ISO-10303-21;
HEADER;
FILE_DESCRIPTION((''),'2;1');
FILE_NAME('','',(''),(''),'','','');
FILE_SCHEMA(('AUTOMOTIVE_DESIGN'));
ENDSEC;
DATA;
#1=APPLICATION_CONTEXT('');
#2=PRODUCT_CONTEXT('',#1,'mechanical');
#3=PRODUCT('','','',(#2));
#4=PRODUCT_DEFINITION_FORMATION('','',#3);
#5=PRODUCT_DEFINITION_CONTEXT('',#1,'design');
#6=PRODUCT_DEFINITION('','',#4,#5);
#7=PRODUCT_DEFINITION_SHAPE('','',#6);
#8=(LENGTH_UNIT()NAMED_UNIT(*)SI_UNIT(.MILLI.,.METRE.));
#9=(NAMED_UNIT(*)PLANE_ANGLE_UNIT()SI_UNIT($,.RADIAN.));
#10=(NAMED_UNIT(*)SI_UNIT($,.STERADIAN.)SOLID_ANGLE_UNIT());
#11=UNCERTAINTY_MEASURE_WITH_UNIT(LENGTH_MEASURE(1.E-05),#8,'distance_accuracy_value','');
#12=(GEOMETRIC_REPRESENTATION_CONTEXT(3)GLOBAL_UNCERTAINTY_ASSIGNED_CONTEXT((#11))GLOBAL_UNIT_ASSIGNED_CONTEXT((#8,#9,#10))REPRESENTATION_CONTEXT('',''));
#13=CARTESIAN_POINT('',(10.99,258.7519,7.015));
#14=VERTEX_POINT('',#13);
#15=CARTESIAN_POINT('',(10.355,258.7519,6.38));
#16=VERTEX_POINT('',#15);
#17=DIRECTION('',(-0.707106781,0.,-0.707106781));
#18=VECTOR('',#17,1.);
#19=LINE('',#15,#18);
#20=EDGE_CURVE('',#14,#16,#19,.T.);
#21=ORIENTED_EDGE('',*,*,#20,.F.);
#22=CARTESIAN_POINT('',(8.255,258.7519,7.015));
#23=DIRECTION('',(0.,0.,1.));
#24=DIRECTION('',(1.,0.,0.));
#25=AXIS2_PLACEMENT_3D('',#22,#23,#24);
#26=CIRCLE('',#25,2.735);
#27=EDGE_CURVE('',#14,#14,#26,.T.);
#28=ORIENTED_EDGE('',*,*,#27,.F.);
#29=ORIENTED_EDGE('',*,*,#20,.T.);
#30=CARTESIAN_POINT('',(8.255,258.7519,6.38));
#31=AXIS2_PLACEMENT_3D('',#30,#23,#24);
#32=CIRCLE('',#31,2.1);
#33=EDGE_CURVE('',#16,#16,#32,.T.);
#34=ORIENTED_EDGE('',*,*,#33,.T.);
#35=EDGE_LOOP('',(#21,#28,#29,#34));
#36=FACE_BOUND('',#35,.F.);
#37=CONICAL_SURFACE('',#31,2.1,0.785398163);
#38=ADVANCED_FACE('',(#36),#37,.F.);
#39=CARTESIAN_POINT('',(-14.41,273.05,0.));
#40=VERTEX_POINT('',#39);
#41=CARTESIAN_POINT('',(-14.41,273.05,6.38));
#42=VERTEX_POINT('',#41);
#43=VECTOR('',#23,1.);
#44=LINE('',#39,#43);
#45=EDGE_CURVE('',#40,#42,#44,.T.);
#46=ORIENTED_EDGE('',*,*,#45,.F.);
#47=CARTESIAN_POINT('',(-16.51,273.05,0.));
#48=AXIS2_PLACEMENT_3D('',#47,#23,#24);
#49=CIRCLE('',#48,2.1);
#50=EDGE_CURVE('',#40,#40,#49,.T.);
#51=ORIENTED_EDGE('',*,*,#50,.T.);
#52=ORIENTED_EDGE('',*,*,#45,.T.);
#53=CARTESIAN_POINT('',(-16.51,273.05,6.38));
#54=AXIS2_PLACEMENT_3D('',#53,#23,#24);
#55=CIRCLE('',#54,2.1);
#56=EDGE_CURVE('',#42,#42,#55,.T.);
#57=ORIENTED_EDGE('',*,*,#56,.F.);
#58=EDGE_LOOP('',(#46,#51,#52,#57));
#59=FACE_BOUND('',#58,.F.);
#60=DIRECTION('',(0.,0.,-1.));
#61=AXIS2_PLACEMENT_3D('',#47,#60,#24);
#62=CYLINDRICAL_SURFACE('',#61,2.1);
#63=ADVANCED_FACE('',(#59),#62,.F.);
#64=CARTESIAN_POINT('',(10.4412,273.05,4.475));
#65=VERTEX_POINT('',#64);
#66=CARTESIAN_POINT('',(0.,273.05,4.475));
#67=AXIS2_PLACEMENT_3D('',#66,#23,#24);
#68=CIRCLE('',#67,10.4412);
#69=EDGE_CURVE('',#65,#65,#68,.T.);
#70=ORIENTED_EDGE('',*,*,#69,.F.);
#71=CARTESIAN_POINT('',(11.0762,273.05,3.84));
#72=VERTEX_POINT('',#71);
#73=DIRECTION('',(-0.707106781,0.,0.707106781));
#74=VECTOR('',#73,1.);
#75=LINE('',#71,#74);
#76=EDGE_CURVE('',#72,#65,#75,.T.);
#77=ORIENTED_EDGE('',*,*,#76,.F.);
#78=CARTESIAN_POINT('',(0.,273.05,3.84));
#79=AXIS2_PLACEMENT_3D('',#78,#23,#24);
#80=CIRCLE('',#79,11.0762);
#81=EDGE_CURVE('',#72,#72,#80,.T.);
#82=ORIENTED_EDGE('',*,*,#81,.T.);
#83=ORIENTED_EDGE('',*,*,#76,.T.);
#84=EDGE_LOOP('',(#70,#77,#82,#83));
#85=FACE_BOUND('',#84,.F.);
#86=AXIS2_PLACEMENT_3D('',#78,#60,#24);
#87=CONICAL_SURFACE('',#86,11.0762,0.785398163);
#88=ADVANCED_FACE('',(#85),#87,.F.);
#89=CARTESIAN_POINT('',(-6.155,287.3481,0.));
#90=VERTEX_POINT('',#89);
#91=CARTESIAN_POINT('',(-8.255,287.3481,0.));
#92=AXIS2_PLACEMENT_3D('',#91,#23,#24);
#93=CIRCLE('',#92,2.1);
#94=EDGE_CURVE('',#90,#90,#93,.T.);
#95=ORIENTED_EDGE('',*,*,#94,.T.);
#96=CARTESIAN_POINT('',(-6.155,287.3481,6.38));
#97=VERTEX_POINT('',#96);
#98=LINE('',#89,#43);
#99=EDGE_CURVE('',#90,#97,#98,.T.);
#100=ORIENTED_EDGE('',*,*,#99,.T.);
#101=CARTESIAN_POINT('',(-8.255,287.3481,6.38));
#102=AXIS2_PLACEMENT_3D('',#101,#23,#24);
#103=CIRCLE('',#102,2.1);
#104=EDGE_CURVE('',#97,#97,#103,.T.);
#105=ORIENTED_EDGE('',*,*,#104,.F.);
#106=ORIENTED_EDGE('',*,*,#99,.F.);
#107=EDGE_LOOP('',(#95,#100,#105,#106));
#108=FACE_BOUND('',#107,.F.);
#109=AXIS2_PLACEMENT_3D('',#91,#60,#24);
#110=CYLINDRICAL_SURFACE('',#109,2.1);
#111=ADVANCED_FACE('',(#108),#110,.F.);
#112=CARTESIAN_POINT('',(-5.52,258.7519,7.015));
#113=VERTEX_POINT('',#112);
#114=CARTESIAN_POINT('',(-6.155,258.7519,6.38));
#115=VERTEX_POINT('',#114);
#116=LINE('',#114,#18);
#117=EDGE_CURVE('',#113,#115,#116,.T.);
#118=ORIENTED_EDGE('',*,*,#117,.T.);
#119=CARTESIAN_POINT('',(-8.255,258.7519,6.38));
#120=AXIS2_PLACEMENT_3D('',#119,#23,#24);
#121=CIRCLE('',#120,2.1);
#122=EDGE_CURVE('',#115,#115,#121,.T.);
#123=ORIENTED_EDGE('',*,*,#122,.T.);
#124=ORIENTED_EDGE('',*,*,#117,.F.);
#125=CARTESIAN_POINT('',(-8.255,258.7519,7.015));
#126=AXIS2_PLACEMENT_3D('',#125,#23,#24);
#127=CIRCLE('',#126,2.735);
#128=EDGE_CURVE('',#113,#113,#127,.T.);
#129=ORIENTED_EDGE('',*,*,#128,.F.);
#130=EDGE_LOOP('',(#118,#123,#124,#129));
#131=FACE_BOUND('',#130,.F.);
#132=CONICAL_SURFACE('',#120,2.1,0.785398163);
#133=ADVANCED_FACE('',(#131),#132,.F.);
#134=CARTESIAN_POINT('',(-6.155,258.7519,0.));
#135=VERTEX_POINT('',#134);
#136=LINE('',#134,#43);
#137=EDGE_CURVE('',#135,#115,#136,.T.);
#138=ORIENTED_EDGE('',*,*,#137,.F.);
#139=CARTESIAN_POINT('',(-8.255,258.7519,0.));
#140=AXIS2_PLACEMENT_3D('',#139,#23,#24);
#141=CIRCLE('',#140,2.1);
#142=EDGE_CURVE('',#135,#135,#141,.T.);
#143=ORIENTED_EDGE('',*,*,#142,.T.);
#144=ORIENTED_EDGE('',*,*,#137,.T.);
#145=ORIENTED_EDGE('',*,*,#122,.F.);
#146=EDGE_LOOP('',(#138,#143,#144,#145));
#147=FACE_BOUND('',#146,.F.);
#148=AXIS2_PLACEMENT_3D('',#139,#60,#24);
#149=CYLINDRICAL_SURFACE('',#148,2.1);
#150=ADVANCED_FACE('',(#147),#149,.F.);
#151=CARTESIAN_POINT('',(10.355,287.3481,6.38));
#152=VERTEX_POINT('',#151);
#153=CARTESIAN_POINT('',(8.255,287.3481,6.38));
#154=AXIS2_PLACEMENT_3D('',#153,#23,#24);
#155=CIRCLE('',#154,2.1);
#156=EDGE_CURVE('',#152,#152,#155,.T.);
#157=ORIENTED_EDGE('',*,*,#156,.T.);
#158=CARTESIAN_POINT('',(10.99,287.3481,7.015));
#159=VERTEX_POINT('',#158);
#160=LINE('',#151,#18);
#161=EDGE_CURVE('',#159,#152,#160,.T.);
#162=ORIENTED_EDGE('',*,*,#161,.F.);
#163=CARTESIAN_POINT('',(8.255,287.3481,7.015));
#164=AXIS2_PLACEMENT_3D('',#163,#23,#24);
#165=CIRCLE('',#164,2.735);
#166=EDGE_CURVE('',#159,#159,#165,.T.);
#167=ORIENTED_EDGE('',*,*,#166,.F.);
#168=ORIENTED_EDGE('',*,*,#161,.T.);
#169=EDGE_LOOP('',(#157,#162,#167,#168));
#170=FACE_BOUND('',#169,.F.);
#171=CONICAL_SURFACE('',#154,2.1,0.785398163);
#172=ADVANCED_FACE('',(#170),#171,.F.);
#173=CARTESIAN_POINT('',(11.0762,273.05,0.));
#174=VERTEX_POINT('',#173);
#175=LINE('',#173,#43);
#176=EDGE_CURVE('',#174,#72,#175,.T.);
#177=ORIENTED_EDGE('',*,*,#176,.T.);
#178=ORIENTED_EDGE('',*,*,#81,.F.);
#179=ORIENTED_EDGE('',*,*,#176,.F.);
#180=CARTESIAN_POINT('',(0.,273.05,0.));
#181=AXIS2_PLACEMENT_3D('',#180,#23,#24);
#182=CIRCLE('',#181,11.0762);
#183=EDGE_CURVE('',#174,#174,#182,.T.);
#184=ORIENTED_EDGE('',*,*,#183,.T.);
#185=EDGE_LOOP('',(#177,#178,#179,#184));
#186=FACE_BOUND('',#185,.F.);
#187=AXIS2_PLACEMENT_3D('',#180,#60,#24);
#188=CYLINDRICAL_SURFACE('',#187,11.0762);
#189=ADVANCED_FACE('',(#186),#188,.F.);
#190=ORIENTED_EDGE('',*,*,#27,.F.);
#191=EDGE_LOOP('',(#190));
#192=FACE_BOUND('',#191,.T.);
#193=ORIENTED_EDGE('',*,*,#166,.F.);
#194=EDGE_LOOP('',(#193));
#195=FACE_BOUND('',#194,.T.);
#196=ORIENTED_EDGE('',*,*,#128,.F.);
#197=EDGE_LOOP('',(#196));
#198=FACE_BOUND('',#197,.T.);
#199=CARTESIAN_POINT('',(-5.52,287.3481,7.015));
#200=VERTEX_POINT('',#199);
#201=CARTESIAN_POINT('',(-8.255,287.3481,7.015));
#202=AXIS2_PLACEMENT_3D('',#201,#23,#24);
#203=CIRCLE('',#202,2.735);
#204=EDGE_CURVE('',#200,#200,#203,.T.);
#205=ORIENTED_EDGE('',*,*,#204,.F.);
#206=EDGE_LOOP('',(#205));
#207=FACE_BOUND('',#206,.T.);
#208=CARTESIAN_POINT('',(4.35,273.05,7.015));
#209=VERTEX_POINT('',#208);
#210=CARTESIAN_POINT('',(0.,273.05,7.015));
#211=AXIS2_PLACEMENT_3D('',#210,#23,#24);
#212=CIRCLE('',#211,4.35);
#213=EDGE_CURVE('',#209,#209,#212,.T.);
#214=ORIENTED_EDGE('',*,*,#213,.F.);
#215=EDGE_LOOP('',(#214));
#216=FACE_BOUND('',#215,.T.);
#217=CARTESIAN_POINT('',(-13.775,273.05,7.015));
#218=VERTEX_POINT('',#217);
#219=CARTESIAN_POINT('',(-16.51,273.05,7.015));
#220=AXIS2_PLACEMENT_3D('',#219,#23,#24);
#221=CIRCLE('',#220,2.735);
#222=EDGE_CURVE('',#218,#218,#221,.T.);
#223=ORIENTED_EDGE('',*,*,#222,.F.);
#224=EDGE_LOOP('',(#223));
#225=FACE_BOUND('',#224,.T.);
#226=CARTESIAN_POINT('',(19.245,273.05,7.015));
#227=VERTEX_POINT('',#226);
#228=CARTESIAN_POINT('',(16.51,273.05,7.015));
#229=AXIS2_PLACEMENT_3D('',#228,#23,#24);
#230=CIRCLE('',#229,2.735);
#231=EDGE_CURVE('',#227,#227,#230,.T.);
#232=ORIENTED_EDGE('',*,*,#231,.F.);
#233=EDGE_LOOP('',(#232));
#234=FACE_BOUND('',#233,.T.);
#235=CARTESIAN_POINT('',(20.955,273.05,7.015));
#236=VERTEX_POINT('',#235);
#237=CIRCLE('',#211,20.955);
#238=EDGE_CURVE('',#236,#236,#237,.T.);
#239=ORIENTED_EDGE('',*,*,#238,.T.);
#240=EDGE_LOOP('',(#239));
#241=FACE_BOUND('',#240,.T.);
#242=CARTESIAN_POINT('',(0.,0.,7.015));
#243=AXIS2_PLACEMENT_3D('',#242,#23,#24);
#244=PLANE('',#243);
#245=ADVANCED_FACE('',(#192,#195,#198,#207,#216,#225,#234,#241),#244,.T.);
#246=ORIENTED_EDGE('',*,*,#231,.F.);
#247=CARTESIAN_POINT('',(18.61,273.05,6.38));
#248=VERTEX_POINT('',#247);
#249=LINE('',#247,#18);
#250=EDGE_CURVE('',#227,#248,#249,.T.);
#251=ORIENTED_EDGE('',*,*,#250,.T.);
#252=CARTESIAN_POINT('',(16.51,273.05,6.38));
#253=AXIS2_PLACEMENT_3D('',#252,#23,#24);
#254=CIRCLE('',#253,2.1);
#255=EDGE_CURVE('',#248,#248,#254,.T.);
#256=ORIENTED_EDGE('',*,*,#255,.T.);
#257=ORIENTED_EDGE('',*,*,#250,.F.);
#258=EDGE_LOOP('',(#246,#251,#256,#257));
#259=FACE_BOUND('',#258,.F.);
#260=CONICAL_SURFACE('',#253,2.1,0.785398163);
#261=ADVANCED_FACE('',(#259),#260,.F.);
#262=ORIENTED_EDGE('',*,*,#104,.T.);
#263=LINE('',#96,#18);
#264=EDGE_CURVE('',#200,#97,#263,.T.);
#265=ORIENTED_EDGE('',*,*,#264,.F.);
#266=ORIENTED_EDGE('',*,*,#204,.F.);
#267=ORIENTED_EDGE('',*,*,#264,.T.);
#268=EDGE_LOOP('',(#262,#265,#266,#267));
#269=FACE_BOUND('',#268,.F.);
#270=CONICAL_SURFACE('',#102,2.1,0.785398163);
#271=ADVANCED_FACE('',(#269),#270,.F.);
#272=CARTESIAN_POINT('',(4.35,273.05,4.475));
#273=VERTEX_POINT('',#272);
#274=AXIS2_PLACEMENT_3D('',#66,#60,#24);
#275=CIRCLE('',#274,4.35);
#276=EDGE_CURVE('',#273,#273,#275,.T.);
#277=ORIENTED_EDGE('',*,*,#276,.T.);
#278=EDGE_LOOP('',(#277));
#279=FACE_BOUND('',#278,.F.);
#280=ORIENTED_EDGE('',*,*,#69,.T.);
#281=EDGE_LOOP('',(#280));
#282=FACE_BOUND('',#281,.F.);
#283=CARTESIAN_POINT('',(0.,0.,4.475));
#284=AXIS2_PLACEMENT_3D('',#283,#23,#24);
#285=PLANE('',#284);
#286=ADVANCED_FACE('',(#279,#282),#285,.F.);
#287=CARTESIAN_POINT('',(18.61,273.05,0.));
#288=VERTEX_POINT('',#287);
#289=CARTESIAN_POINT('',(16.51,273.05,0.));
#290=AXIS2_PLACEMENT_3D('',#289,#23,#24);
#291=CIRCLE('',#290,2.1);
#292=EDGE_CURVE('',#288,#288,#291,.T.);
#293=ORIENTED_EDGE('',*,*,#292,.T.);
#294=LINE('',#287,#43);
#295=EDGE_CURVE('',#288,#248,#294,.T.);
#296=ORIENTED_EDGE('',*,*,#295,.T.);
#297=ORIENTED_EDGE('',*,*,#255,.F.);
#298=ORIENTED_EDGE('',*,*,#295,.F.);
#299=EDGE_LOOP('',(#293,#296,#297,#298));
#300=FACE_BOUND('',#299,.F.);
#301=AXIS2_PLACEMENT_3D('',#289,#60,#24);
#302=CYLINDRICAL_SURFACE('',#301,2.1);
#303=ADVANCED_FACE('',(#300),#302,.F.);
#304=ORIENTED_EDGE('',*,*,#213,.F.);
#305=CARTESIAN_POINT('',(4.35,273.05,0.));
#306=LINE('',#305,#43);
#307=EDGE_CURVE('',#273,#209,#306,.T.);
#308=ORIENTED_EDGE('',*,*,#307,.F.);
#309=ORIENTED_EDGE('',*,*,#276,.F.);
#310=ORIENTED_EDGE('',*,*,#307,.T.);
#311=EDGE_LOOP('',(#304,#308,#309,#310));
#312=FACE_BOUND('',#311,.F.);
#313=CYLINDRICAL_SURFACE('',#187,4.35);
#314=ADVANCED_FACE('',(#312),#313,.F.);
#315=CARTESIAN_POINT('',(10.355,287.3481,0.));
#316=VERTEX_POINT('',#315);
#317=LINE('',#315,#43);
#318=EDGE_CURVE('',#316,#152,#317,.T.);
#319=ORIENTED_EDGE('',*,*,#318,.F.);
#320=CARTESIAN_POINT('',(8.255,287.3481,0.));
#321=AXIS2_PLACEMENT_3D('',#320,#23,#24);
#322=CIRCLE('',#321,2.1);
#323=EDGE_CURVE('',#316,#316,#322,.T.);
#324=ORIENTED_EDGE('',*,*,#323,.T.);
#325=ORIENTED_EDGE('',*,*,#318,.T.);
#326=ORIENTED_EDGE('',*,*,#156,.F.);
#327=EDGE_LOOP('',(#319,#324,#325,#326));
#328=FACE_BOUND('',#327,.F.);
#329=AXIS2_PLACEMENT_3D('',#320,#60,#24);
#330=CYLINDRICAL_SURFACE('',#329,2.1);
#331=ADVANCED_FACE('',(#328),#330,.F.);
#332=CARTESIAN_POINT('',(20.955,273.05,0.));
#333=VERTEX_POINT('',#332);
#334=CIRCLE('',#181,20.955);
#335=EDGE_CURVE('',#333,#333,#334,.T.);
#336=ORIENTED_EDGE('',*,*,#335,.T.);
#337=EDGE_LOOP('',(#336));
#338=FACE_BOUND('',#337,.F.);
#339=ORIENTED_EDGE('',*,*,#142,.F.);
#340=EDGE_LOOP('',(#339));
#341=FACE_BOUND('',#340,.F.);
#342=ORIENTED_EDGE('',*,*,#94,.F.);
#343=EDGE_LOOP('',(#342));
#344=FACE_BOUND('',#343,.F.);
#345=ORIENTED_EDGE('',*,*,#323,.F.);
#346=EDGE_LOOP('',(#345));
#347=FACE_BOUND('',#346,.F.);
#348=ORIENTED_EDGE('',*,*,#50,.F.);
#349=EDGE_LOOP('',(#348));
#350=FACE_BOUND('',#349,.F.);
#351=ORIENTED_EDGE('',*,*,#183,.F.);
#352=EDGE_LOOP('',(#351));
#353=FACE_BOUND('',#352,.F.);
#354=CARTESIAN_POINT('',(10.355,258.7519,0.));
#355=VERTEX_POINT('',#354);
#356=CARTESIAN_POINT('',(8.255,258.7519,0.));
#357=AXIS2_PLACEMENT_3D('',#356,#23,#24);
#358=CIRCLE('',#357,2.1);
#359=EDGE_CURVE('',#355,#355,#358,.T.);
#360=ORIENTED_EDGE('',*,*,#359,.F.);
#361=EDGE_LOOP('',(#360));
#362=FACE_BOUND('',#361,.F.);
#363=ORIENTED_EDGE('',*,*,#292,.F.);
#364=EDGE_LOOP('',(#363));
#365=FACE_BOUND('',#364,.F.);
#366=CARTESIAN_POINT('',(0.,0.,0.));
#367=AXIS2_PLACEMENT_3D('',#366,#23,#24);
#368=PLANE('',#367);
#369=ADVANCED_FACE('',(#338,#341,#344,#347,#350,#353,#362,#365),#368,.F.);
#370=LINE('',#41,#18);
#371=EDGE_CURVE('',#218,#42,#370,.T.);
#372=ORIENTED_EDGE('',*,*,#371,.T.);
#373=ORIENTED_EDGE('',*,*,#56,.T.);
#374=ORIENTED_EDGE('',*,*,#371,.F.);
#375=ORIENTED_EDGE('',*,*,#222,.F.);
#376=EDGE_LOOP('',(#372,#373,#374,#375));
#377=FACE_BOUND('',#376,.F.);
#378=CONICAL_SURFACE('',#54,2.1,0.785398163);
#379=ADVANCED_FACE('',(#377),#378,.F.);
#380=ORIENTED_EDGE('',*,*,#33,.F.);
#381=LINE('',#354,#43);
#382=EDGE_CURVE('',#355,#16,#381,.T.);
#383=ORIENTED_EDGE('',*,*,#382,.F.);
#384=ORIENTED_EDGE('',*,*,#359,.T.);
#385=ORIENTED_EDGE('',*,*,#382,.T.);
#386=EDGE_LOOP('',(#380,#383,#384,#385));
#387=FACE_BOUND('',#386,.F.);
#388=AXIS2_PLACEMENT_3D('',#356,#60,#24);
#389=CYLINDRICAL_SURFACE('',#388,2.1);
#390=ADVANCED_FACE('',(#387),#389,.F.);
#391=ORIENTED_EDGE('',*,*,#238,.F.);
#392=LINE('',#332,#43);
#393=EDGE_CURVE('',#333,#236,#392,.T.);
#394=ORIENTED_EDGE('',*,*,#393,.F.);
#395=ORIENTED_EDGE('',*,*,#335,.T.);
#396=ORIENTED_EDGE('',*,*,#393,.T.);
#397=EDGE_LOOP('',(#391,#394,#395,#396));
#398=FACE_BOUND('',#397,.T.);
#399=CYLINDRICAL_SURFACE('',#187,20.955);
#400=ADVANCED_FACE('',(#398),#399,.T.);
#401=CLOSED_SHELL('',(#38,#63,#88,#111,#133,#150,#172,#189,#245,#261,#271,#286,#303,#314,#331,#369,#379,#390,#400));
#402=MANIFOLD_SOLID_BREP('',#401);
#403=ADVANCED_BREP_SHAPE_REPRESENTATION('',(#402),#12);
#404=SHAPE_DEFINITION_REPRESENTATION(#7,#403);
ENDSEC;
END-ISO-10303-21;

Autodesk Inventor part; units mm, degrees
ref_plane "YZ Plane" through (0, 0, 0) normal (1, 0, 0) x (0, 1, 0)
ref_plane "XZ Plane" through (0, 0, 0) normal (0, 1, 0) x (-1, 0, 0)
ref_plane "XY Plane" through (0, 0, 0) normal (0, 0, 1) x (1, 0, 0)
sketch "Sketch1" plane through (0, 0, 0) normal (0, 0, 1) x (1, 0, 0)
  circle A0 centre (0, 273.05) radius 20.955 projected
  circle A1 centre (0, 273.05) radius 11 projected
  arc A2 (219.754, -304.8) -> (225.7704, -296.4188) centre (219.754, -298.45) ccw projected
  line L0 (225.7704, -296.4188) -> (30.0819, 283.206) projected
  arc A3 (30.0819, 283.206) -> (-30.0819, 283.206) centre (0, 273.05) ccw projected
  line L1 (-30.0819, 283.206) -> (-225.7704, -296.4188) projected
  arc A4 (-225.7704, -296.4188) -> (-219.754, -304.8) centre (-219.754, -298.45) ccw projected
  line L2 (-219.754, -304.8) -> (219.754, -304.8) projected
  line L3 (-38.1, -17.4222) -> (-38.1, -222.25) projected
  arc A5 (-44.45, -228.6) -> (-38.1, -222.25) centre (-44.45, -222.25) ccw projected
  line L4 (-44.45, -228.6) -> (-113.6024, -228.6) projected
  arc A6 (-119.6188, -220.2188) -> (-113.6024, -228.6) centre (-113.6024, -222.25) ccw projected
  line L5 (-119.6188, -220.2188) -> (-50.4664, -15.391) projected
  arc A7 (-38.1, -17.4222) -> (-50.4664, -15.391) centre (-44.45, -17.4222) ccw projected
  line L6 (113.6024, -228.6) -> (44.45, -228.6) projected
  arc A8 (38.1, -222.25) -> (44.45, -228.6) centre (44.45, -222.25) ccw projected
  line L7 (38.1, -222.25) -> (38.1, -17.4222) projected
  arc A9 (50.4664, -15.391) -> (38.1, -17.4222) centre (44.45, -17.4222) ccw projected
  line L8 (50.4664, -15.391) -> (119.6188, -220.2188) projected
  arc A10 (113.6024, -228.6) -> (119.6188, -220.2188) centre (113.6024, -222.25) ccw projected
  circle A11 centre (-204.2059, -292.1) radius 2 projected
  circle A12 centre (-187.0552, -241.3) radius 2 projected
  circle A13 centre (187.0552, -241.3) radius 2 projected
  circle A14 centre (204.2059, -292.1) radius 2 projected
  circle A15 centre (19.05, -241.3) radius 2 projected
  circle A16 centre (19.05, -292.1) radius 2 projected
  circle A17 centre (-19.05, -292.1) radius 2 projected
  circle A18 centre (-19.05, -241.3) radius 2 projected
  circle A19 centre (8.255, 287.3481) radius 2 projected
  circle A20 centre (-8.255, 287.3481) radius 2 projected
  circle A21 centre (-16.51, 273.05) radius 2 projected
  circle A22 centre (-8.255, 258.7519) radius 2 projected
  circle A23 centre (8.255, 258.7519) radius 2 projected
  circle A24 centre (16.51, 273.05) radius 2 projected
  circle A25 centre (0, 273.05) radius 11 projected
  circle A26 centre (0, 273.05) radius 11.0762
  circle A27 centre (-8.255, 287.3481) radius 2.1
  circle A28 centre (8.255, 287.3481) radius 2.1
  circle A29 centre (16.51, 273.05) radius 2.1
  circle A30 centre (8.255, 258.7519) radius 2.1
  circle A31 centre (-8.255, 258.7519) radius 2.1
  circle A32 centre (-16.51, 273.05) radius 2.1
  circle A33 centre (0, 273.05) radius 4.35
  point P0 (0, 0)
  dimension "d0" = 0.0762
  dimension "d1" = 4.2
  dimension "d2" = 4.2
  dimension "d3" = 4.2
  dimension "d4" = 4.2
  dimension "d5" = 4.2
  dimension "d6" = 4.2
  dimension "d9" = 8.7
extrude "Extrusion1" add sketch "Sketch1" along normal blind 7.015 contours A0 | A1 | A26
extrude "Extrusion2" cut sketch "Sketch1" along normal blind 4.475 contours A1 | A26 | A33
chamfer "Chamfer1" distance 0.635 angle 45 7 edges at (-11.0762, 273.05, 4.475) (6.155, 287.3481, 7.015) (-10.355, 287.3481, 7.015) (-18.61, 273.05, 7.015) (-10.355, 258.7519, 7.015) (6.155, 258.7519, 7.015) (14.41, 273.05, 7.015)
properties part number "MainOuterBearingMount"
